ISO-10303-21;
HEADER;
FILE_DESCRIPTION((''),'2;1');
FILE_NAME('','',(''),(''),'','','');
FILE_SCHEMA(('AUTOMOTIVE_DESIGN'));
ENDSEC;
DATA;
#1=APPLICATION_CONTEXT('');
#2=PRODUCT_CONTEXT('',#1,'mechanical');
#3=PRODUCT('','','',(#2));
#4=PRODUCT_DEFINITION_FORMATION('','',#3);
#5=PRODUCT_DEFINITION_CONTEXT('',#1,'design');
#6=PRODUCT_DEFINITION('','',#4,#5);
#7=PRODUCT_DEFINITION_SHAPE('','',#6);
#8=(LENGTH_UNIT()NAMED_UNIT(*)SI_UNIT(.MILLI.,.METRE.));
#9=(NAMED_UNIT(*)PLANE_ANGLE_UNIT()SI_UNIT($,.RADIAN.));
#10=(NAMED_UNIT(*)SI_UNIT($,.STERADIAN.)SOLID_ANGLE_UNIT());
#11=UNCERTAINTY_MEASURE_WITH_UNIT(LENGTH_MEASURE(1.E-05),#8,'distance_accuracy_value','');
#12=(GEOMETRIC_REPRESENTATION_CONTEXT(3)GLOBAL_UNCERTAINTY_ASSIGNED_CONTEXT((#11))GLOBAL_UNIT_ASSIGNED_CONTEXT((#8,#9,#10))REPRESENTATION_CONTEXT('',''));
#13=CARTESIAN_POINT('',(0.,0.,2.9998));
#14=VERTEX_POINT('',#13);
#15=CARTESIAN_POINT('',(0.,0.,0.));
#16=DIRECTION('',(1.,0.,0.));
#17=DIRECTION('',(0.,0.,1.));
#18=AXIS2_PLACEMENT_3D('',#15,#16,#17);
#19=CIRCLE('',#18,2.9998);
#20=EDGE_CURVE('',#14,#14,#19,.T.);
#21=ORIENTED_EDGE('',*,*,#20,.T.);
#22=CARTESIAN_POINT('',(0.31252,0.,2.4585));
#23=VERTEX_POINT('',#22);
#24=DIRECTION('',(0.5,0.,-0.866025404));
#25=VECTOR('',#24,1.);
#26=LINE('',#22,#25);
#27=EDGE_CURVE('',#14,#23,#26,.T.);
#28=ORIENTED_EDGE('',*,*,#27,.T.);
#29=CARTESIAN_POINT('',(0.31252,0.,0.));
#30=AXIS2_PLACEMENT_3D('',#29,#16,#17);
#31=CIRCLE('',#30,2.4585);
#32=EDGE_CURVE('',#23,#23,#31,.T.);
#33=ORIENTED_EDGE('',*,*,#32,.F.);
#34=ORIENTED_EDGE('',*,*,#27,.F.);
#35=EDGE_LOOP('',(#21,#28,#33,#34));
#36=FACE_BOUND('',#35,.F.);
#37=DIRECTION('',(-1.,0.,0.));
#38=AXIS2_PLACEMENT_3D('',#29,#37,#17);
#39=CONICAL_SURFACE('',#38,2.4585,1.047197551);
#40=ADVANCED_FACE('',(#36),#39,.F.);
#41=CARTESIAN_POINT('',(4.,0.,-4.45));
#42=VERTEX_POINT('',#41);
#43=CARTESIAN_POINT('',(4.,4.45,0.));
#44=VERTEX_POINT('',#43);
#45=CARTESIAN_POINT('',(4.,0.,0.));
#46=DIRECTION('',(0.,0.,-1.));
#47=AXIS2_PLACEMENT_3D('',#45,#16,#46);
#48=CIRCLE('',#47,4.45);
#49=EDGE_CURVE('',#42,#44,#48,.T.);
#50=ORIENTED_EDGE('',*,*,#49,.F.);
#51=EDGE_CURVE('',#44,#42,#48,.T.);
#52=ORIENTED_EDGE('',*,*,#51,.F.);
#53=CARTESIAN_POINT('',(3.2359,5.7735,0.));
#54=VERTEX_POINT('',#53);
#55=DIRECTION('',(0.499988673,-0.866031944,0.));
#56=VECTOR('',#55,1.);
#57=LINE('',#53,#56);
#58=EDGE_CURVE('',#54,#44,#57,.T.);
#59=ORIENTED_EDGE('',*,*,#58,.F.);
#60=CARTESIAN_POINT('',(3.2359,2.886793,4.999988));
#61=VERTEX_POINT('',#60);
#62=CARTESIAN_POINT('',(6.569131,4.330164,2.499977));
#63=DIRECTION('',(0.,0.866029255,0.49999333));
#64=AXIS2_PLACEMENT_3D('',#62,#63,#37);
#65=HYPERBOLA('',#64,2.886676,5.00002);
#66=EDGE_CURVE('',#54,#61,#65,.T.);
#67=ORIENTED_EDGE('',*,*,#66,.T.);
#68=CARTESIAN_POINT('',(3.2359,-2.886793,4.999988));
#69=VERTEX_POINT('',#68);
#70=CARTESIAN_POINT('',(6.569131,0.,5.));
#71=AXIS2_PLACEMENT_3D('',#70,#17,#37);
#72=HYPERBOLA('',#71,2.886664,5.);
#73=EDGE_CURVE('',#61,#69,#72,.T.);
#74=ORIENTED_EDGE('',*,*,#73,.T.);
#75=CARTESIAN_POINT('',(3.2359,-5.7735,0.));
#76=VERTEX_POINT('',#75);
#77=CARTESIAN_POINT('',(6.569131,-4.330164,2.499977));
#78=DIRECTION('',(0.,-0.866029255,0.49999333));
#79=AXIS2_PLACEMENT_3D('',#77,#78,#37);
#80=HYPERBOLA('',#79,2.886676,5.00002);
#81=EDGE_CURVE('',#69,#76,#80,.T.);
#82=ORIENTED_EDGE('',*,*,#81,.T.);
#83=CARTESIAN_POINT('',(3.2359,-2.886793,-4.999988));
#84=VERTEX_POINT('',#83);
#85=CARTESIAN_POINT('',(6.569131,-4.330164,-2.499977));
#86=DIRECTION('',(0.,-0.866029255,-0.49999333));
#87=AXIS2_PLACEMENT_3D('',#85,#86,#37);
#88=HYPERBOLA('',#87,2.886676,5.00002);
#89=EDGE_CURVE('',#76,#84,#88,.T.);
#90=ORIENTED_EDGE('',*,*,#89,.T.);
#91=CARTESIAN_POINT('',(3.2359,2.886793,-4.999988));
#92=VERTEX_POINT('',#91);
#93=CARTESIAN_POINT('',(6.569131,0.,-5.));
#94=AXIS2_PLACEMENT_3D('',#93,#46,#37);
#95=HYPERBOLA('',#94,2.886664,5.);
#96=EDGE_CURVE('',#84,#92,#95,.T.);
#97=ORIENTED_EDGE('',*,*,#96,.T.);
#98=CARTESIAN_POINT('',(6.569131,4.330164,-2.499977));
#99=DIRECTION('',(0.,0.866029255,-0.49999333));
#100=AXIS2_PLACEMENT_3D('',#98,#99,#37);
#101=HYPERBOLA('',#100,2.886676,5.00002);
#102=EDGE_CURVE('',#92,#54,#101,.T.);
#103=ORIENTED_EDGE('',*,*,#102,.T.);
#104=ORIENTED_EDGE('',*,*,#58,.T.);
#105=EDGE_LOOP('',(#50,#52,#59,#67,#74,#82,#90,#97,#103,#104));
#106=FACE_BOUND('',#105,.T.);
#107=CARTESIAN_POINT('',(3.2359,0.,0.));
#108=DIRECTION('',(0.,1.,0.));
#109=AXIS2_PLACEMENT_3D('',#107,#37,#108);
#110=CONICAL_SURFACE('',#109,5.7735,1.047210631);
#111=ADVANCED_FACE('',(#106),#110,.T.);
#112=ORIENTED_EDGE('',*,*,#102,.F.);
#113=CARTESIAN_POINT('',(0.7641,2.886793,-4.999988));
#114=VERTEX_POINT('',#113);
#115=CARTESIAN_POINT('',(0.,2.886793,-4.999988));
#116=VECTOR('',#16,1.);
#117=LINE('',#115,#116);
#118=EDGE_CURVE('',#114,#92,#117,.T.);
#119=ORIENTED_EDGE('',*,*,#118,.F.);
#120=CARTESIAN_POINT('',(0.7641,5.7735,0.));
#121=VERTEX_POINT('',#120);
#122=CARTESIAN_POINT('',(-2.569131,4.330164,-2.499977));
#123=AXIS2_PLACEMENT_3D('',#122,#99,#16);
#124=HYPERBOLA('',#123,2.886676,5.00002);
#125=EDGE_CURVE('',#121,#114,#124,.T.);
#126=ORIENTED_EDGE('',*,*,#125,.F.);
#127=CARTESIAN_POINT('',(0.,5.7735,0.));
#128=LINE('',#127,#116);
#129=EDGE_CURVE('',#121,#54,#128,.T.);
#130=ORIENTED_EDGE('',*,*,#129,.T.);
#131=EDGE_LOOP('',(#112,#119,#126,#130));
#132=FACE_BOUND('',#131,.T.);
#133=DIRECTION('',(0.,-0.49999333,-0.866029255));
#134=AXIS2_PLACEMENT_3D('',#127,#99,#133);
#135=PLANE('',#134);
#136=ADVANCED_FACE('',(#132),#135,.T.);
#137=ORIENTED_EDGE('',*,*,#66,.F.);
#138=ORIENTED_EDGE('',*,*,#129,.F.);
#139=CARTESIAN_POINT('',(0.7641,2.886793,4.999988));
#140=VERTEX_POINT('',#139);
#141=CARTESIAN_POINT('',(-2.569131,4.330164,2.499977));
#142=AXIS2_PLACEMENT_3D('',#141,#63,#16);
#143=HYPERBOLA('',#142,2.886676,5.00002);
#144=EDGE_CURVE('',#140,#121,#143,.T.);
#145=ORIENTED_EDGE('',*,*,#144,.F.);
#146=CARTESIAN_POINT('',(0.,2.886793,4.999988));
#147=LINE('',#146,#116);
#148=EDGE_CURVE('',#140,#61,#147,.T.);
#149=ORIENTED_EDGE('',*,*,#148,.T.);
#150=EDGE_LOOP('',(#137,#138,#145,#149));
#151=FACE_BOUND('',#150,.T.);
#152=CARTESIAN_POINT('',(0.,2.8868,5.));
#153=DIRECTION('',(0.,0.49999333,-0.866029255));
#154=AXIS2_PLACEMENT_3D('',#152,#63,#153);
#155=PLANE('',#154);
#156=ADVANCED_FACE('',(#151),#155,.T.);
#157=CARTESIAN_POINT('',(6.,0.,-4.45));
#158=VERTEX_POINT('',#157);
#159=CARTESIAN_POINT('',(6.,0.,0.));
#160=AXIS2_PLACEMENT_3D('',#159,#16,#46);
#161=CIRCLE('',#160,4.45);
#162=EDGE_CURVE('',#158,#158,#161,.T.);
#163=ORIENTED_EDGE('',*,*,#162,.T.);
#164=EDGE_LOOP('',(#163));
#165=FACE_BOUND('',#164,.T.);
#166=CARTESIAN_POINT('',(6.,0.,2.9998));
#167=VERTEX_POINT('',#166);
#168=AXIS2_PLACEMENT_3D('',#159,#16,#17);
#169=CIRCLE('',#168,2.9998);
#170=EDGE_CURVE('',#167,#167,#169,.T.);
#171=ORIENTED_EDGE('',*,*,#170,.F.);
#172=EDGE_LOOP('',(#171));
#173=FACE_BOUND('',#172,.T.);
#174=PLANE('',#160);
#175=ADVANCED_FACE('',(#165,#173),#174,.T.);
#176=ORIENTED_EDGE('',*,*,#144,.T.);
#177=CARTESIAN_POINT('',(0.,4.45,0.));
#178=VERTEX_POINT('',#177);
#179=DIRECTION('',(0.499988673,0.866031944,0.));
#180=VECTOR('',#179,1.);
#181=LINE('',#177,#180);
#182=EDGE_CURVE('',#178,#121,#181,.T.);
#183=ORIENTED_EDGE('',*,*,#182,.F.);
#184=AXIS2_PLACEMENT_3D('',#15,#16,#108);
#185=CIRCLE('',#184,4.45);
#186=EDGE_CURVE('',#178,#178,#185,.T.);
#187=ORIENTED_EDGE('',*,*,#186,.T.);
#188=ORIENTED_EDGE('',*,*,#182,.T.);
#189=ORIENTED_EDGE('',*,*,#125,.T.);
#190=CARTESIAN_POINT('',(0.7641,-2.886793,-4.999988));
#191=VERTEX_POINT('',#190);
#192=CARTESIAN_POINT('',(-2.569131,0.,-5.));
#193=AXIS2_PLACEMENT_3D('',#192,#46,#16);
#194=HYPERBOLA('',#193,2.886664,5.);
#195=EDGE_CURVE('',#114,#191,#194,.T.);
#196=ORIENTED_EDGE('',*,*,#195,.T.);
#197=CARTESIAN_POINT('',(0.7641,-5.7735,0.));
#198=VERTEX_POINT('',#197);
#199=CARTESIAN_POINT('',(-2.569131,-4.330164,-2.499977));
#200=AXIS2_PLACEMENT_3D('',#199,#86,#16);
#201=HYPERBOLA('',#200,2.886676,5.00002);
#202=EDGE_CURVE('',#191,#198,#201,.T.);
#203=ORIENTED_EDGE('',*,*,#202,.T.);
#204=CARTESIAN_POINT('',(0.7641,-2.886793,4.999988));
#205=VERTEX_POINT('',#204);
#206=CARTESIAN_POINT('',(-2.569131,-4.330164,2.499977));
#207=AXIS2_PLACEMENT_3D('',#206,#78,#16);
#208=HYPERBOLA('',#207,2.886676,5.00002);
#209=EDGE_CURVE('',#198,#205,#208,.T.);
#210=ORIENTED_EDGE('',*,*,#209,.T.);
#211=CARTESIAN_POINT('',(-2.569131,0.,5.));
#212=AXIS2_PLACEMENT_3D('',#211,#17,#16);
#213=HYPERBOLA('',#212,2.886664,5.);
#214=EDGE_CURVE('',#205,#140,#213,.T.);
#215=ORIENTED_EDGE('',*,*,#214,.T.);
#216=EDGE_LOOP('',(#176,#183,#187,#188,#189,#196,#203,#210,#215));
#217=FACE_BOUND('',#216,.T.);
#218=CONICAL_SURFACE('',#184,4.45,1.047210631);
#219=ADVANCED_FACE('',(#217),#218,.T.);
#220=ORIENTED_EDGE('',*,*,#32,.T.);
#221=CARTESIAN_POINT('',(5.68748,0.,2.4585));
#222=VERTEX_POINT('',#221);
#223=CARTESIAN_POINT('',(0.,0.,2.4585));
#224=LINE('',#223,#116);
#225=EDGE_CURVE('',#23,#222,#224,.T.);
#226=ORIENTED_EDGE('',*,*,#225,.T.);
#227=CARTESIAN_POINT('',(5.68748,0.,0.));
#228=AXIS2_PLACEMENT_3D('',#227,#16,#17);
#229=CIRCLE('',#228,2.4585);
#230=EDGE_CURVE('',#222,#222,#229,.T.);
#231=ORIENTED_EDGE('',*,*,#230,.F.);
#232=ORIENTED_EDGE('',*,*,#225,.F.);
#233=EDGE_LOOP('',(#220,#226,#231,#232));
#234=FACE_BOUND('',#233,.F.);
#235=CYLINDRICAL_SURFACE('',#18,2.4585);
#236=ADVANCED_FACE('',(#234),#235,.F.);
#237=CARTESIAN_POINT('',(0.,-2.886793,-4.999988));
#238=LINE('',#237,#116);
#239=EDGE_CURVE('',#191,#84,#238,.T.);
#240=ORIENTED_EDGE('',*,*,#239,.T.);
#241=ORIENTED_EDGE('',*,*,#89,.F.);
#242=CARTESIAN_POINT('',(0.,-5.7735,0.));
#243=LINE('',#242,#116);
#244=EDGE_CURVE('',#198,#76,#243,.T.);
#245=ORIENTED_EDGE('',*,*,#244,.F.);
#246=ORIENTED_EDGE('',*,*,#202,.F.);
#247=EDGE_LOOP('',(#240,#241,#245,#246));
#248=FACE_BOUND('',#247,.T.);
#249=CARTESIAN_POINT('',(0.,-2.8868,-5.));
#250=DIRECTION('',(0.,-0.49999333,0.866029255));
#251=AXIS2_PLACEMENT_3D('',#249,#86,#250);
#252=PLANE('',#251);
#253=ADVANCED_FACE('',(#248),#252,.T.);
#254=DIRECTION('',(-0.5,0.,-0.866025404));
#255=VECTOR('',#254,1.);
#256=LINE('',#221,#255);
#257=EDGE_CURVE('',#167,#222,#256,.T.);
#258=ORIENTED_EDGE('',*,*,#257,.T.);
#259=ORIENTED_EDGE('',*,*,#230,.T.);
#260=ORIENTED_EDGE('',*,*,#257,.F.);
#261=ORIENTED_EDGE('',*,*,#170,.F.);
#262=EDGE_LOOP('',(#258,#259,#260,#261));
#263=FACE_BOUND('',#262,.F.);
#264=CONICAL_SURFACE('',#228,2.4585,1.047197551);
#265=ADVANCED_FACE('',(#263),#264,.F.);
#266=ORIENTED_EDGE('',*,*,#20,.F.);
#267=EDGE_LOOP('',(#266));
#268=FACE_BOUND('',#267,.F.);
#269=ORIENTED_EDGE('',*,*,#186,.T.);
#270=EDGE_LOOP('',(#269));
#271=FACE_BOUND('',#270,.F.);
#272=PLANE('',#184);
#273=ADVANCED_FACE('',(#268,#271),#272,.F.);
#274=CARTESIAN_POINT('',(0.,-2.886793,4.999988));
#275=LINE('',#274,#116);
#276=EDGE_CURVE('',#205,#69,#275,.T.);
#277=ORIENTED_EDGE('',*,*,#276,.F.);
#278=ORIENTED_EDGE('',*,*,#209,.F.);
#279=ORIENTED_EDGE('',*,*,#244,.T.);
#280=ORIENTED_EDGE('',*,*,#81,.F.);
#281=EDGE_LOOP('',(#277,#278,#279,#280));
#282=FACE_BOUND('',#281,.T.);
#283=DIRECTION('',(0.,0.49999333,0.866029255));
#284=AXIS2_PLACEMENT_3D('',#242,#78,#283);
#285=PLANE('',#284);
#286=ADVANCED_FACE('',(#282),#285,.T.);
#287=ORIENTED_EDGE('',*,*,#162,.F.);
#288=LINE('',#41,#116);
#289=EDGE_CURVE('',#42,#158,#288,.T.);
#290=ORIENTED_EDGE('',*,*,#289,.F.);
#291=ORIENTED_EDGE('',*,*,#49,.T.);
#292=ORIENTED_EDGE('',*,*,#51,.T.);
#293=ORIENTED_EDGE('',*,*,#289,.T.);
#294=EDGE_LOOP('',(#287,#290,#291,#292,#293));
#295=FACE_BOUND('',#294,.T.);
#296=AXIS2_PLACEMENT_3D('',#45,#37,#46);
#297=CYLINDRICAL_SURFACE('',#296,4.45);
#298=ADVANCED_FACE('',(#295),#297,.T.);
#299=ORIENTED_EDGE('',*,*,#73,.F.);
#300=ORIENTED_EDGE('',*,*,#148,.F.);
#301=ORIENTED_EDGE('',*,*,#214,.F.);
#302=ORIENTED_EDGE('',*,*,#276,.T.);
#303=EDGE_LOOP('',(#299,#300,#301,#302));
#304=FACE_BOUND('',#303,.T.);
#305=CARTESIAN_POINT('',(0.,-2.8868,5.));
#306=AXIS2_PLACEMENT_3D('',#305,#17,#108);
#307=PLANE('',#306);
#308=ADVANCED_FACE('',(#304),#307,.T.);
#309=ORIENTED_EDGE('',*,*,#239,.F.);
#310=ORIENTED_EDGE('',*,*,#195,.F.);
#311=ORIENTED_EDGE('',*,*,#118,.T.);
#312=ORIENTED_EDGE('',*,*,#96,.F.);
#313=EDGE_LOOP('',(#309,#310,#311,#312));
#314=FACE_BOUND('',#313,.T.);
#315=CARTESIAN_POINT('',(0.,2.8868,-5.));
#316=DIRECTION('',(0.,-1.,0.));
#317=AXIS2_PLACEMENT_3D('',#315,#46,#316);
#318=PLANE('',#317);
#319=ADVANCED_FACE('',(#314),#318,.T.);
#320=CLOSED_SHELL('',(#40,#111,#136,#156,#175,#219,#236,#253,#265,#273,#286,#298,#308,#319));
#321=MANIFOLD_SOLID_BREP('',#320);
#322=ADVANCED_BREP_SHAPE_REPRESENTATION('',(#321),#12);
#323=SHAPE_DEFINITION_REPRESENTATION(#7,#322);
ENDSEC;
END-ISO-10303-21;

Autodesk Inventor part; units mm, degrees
ref_plane "YZ Plane" through (0, 0, 0) normal (1, 0, 0) x (0, 1, 0)
ref_plane "XZ Plane" through (0, 0, 0) normal (0, 1, 0) x (-1, 0, 0)
sketch "Sketch1" plane through (0, 0, 0) normal (1, 0, 0) x (0, 1, 0)
  line L0 (2.8868, -5) -> (-2.8868, -5)
  line L1 (-2.8868, -5) -> (-5.7735, 0)
  line L2 (-5.7735, 0) -> (-2.8868, 5)
  line L3 (-2.8868, 5) -> (2.8868, 5)
  line L4 (2.8868, 5) -> (5.7735, 0)
  line L5 (5.7735, 0) -> (2.8868, -5)
  point P0 (0, 0)
  point P1 (0, 0)
  dimension "d0" = 11.547
extrude "Body" add sketch "Sketch1" along normal blind 4
sketch "Sketch2" plane through (4, 0, 0) normal (1, 0, 0) x (0, 0, -1)
  circle A0 centre (0, 0) radius 4.45
  dimension "d7" = 8.9
extrude "Ring" add sketch "Sketch2" along normal blind 2
sketch "Sketch3" plane through (0, 0, 0) normal (0, 0, 1) x (1, 0, 0)
  line L0 (0, 2.8868) -> (0, 5.7735) projected
  line L1 (0, 5.7735) -> (4, 5.7735) projected
  line L2 (4, 2.8868) -> (4, 5.7735) projected
  line L3 (-0.8, 0) -> (4.8, 0) projected
  line L4 (0, 4.45) -> (0.7641, 5.7735)
  line L5 (3.2359, 5.7735) -> (4, 4.45)
  dimension "d3" = 30
  dimension "d4" = 30
  dimension "d5" = 8.9
  dimension "d6" = 8.9
revolve "Chamfer1" cut sketch "Sketch3" angle 360 about axis through (-10, 0, 0) along (1, 0, 0)
sketch "Sketch4" plane through (0, 0, 0) normal (-1, 0, 0) x (0, 0, 1)
  line L0 (0, -8.0829) -> (0, 8.0829) projected
  line L1 (-7, 0) -> (7, 0) projected
  point P0 (0, 0)
hole "Thread" at (0, 0, 0) direction (1, 0, 0) diameter 4.917 end through all thread size "M6x1" class "6H" standard "ISO Metric profile"
chamfer "Chamfer2" distance 0.5413 angle 30 1 edges at (0, 0, -2.4585) measured on face at (0, 3.7371, -0.4538)
chamfer "Chamfer3" distance 0.5413 angle 30 1 edges at (6, 0, -2.4585) measured on face at (6, -0.5511, -3.7193)
ref_plane "Work Plane1" through (16.4368, 0, 0) normal (0, 0, 1) x (-1, 0, 0)
equation "\"d0\" = 1.1547 * SW"
equation "\"d1\" = KOH1"
equation "\"d7\" = SD2"
equation "\"d8\" = KOH - KOH1"
equation "\"d3\" = ANG1"
equation "\"d4\" = ANG2"
equation "\"d5\" = SW0"
equation "\"d6\" = SW01"
equation "\"d10\" = -0.5 * GD1 + 0.5 * NND"
equation "\"d46\" = -0.5 * GD1 + 0.5 * NND"
equation "\"d12\" = -0.5 * GD1 + 0.5 * NND"
equation "\"d47\" = -0.5 * GD1 + 0.5 * NND"
equation "\"ANG1\" = 30deg"
equation "\"ANG2\" = 30deg"
equation "\"NND\" = 6"
equation "\"KOH1\" = 4"
equation "\"KOH\" = 6"
equation "\"SW0\" = 8.9"
equation "\"SW01\" = SW0"
equation "\"SD2\" = SW0"
equation "\"GUL\" = 0.541266 * PTC"
equation "\"THREADDIA\" = 6"
equation "\"TOA\" = 30deg"
equation "\"PTC\" = 1"
equation "\"GAL\" = 0.541266 * PTC"
equation "\"E0\" = 1.155 * SW"
equation "\"SW\" = 10"
equation "\"GD1\" = 4.917468"
properties part number "DIN 985 - M6" material "Steel, Mild"
